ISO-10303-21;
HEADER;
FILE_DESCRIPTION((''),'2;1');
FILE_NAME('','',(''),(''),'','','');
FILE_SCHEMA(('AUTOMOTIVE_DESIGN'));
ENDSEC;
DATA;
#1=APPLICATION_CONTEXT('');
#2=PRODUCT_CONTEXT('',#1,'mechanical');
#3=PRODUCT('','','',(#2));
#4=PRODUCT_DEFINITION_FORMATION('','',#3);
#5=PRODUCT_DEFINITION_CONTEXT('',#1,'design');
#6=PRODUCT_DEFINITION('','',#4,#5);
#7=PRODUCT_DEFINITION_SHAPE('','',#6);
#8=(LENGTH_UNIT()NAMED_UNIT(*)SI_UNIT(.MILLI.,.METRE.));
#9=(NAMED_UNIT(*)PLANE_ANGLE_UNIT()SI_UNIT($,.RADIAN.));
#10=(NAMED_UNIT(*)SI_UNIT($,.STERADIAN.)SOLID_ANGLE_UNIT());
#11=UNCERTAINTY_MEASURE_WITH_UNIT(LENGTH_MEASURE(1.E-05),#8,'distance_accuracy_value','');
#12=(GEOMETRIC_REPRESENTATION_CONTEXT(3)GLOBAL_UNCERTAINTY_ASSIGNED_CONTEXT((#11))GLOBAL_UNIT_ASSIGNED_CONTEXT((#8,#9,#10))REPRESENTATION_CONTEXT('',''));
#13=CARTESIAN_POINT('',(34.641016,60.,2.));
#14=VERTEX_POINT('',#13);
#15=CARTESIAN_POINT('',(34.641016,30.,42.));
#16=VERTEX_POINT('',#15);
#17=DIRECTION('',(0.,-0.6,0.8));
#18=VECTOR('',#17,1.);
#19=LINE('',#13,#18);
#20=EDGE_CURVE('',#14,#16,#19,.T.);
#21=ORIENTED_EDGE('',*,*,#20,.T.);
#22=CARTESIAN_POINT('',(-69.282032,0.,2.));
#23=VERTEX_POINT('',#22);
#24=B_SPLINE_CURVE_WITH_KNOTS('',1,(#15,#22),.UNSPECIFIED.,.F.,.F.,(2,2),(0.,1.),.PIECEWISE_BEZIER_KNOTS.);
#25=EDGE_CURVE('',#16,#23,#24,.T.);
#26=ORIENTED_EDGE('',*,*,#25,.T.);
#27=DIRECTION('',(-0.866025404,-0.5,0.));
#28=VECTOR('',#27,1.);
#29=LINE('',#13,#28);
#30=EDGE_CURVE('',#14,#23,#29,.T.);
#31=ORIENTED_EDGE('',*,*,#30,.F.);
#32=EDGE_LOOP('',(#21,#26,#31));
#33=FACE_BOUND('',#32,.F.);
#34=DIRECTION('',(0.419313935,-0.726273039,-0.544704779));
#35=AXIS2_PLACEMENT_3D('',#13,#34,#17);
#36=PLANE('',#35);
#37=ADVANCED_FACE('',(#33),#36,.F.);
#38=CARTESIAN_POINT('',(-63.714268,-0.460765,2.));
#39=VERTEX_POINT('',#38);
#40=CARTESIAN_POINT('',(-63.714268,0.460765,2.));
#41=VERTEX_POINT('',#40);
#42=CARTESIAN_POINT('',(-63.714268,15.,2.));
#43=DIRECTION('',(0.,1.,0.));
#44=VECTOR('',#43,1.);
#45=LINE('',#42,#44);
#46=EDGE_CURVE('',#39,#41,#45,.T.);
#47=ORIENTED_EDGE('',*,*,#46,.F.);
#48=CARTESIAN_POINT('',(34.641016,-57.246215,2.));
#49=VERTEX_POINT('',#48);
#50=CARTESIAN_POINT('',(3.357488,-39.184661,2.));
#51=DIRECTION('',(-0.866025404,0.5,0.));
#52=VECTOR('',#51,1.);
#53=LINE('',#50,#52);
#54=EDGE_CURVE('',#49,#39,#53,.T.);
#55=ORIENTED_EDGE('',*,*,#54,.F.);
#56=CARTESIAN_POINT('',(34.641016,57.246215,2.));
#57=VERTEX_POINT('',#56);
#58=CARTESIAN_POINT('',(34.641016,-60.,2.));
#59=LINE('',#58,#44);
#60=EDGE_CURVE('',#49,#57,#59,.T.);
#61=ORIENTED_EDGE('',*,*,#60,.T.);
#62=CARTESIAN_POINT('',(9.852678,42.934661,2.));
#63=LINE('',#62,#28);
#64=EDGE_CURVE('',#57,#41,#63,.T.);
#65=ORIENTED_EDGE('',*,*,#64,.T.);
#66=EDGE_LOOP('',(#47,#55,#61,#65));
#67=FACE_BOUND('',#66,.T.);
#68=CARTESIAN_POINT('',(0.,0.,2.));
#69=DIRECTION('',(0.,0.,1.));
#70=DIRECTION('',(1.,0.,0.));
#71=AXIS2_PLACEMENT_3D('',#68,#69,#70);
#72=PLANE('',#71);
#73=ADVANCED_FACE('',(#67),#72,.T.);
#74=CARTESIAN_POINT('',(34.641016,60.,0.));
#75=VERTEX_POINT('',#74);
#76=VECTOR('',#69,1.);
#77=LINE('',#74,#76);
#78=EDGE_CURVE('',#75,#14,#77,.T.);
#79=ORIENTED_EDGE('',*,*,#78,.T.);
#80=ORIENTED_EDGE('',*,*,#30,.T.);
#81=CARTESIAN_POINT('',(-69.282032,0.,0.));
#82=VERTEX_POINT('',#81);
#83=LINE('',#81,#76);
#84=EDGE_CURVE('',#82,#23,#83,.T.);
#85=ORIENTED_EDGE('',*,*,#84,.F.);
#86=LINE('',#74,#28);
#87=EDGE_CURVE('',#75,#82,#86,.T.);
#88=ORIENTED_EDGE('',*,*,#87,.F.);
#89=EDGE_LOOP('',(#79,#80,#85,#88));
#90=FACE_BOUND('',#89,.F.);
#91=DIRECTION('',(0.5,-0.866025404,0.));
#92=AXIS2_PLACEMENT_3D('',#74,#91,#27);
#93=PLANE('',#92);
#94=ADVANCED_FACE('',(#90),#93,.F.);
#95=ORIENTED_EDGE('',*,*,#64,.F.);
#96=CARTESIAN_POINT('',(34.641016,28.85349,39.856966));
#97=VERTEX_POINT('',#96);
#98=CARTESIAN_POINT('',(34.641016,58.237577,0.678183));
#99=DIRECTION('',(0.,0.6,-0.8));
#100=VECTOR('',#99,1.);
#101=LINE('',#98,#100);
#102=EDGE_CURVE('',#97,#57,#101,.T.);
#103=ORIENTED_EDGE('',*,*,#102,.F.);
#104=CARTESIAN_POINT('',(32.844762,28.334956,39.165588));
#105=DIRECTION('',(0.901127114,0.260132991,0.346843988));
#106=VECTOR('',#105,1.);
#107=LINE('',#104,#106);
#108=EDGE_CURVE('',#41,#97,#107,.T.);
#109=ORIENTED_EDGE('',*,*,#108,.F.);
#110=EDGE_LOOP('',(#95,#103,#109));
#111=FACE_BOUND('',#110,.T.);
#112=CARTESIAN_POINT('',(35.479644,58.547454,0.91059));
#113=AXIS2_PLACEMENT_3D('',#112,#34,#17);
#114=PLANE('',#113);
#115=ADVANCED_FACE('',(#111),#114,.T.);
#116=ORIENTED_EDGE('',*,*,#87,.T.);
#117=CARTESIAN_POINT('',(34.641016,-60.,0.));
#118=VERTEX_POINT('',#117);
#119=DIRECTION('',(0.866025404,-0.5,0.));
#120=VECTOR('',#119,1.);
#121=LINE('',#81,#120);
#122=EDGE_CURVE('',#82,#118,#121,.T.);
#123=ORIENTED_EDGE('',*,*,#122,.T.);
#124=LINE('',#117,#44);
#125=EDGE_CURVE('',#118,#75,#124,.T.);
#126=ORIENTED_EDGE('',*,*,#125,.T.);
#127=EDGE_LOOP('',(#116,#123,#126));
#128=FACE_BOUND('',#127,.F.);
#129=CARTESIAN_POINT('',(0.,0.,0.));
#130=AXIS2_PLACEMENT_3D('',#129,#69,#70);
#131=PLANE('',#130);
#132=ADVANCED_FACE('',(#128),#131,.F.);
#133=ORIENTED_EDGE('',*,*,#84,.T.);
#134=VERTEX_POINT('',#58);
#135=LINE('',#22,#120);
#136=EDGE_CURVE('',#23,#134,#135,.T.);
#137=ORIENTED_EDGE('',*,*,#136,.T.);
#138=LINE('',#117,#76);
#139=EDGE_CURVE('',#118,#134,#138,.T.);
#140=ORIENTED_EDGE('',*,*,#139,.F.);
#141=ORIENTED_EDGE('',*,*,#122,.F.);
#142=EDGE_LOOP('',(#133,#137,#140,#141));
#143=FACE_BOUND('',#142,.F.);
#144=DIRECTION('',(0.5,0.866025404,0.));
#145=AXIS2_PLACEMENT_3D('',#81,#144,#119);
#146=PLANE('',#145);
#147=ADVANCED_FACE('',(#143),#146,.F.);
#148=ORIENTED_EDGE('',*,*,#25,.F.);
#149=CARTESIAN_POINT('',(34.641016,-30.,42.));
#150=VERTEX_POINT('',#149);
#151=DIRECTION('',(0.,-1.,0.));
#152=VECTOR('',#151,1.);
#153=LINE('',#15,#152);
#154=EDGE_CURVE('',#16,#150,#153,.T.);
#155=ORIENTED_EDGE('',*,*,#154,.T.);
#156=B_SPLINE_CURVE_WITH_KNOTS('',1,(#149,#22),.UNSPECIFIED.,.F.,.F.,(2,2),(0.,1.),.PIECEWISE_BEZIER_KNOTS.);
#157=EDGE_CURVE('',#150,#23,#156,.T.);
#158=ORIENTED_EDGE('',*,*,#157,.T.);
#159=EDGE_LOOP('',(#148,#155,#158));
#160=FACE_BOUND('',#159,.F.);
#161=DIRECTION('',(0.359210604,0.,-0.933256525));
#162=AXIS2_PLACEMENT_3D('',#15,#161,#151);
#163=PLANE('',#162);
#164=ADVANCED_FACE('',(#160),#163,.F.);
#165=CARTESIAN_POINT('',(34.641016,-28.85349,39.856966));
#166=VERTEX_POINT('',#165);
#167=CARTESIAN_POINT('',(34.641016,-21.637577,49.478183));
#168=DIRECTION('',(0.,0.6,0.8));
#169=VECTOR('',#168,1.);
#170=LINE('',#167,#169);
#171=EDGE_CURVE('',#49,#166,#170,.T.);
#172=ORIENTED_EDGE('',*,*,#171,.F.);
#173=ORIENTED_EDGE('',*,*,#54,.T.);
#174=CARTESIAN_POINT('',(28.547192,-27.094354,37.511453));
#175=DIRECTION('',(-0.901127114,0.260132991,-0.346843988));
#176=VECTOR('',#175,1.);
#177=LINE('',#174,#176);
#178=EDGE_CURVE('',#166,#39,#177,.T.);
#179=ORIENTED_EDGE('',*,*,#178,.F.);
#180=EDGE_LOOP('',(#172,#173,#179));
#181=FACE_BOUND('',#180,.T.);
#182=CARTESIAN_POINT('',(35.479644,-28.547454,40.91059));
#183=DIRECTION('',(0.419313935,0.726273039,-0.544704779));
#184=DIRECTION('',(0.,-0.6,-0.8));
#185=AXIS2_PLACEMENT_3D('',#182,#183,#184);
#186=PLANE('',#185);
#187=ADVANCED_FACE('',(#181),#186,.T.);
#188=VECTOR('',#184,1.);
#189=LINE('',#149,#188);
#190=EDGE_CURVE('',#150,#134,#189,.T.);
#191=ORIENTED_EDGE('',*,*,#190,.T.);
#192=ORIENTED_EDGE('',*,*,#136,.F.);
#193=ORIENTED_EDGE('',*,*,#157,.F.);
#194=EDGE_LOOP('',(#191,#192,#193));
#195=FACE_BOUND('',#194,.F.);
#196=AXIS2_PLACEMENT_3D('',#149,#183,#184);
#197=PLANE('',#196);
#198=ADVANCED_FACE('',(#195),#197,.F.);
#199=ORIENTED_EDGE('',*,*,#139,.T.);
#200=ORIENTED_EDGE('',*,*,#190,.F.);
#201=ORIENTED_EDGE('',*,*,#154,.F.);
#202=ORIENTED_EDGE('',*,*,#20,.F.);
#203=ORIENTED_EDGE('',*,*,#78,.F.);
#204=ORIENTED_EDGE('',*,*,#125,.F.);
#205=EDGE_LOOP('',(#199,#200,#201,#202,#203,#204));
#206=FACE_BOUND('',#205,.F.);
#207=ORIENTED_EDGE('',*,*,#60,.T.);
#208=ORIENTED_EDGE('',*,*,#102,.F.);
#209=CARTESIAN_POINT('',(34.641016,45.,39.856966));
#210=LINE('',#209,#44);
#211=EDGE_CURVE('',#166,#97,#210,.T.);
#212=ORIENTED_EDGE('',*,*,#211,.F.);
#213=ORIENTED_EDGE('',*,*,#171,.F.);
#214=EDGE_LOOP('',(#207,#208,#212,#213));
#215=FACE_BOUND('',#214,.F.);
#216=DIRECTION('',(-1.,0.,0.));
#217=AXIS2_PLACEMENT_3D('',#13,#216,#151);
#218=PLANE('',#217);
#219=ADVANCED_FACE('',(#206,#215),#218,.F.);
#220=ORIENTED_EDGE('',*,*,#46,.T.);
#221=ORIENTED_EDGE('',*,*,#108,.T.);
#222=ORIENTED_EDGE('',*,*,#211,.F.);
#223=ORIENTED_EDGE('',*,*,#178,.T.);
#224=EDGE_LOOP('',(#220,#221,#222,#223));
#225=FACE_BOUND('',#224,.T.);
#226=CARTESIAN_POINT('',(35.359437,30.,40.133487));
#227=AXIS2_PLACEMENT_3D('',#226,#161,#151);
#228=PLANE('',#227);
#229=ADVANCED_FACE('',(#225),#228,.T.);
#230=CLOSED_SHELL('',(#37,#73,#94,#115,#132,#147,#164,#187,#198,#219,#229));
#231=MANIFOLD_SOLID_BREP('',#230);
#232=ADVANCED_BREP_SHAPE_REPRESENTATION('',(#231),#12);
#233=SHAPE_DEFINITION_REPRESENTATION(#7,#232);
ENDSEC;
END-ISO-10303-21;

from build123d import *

# Parameters (mm, degrees)
F1_DEPTH = 2
F4_T     = -2


with BuildPart() as f1:
    # F0 (on Top) → F1 (new body)
    with BuildSketch(Plane.XY):
        Polygon((34.6410161514, -60), (34.6410161514, 60), (-69.2820323028, 0), align=None)
    extrude(amount=F1_DEPTH)

    # F2 (on face) → F3 section 0
    with BuildSketch(Plane.YZ.offset(34.6410161514), mode=Mode.PRIVATE) as f3_s0:
        Polygon((60, 2), (30, 42), (0, 42), (-30, 42), (-60, 2), align=None)
    loft([f3_s0.sketch, Vertex(-69.2820323028, 0, 2)])

    # F4
    f4_openings = [f1.faces().sort_by_distance(p)[0] for p in [
        (34.641016, 0, 18.604167),
    ]]
    offset(amount=F4_T, openings=f4_openings)


solid = f1.part
